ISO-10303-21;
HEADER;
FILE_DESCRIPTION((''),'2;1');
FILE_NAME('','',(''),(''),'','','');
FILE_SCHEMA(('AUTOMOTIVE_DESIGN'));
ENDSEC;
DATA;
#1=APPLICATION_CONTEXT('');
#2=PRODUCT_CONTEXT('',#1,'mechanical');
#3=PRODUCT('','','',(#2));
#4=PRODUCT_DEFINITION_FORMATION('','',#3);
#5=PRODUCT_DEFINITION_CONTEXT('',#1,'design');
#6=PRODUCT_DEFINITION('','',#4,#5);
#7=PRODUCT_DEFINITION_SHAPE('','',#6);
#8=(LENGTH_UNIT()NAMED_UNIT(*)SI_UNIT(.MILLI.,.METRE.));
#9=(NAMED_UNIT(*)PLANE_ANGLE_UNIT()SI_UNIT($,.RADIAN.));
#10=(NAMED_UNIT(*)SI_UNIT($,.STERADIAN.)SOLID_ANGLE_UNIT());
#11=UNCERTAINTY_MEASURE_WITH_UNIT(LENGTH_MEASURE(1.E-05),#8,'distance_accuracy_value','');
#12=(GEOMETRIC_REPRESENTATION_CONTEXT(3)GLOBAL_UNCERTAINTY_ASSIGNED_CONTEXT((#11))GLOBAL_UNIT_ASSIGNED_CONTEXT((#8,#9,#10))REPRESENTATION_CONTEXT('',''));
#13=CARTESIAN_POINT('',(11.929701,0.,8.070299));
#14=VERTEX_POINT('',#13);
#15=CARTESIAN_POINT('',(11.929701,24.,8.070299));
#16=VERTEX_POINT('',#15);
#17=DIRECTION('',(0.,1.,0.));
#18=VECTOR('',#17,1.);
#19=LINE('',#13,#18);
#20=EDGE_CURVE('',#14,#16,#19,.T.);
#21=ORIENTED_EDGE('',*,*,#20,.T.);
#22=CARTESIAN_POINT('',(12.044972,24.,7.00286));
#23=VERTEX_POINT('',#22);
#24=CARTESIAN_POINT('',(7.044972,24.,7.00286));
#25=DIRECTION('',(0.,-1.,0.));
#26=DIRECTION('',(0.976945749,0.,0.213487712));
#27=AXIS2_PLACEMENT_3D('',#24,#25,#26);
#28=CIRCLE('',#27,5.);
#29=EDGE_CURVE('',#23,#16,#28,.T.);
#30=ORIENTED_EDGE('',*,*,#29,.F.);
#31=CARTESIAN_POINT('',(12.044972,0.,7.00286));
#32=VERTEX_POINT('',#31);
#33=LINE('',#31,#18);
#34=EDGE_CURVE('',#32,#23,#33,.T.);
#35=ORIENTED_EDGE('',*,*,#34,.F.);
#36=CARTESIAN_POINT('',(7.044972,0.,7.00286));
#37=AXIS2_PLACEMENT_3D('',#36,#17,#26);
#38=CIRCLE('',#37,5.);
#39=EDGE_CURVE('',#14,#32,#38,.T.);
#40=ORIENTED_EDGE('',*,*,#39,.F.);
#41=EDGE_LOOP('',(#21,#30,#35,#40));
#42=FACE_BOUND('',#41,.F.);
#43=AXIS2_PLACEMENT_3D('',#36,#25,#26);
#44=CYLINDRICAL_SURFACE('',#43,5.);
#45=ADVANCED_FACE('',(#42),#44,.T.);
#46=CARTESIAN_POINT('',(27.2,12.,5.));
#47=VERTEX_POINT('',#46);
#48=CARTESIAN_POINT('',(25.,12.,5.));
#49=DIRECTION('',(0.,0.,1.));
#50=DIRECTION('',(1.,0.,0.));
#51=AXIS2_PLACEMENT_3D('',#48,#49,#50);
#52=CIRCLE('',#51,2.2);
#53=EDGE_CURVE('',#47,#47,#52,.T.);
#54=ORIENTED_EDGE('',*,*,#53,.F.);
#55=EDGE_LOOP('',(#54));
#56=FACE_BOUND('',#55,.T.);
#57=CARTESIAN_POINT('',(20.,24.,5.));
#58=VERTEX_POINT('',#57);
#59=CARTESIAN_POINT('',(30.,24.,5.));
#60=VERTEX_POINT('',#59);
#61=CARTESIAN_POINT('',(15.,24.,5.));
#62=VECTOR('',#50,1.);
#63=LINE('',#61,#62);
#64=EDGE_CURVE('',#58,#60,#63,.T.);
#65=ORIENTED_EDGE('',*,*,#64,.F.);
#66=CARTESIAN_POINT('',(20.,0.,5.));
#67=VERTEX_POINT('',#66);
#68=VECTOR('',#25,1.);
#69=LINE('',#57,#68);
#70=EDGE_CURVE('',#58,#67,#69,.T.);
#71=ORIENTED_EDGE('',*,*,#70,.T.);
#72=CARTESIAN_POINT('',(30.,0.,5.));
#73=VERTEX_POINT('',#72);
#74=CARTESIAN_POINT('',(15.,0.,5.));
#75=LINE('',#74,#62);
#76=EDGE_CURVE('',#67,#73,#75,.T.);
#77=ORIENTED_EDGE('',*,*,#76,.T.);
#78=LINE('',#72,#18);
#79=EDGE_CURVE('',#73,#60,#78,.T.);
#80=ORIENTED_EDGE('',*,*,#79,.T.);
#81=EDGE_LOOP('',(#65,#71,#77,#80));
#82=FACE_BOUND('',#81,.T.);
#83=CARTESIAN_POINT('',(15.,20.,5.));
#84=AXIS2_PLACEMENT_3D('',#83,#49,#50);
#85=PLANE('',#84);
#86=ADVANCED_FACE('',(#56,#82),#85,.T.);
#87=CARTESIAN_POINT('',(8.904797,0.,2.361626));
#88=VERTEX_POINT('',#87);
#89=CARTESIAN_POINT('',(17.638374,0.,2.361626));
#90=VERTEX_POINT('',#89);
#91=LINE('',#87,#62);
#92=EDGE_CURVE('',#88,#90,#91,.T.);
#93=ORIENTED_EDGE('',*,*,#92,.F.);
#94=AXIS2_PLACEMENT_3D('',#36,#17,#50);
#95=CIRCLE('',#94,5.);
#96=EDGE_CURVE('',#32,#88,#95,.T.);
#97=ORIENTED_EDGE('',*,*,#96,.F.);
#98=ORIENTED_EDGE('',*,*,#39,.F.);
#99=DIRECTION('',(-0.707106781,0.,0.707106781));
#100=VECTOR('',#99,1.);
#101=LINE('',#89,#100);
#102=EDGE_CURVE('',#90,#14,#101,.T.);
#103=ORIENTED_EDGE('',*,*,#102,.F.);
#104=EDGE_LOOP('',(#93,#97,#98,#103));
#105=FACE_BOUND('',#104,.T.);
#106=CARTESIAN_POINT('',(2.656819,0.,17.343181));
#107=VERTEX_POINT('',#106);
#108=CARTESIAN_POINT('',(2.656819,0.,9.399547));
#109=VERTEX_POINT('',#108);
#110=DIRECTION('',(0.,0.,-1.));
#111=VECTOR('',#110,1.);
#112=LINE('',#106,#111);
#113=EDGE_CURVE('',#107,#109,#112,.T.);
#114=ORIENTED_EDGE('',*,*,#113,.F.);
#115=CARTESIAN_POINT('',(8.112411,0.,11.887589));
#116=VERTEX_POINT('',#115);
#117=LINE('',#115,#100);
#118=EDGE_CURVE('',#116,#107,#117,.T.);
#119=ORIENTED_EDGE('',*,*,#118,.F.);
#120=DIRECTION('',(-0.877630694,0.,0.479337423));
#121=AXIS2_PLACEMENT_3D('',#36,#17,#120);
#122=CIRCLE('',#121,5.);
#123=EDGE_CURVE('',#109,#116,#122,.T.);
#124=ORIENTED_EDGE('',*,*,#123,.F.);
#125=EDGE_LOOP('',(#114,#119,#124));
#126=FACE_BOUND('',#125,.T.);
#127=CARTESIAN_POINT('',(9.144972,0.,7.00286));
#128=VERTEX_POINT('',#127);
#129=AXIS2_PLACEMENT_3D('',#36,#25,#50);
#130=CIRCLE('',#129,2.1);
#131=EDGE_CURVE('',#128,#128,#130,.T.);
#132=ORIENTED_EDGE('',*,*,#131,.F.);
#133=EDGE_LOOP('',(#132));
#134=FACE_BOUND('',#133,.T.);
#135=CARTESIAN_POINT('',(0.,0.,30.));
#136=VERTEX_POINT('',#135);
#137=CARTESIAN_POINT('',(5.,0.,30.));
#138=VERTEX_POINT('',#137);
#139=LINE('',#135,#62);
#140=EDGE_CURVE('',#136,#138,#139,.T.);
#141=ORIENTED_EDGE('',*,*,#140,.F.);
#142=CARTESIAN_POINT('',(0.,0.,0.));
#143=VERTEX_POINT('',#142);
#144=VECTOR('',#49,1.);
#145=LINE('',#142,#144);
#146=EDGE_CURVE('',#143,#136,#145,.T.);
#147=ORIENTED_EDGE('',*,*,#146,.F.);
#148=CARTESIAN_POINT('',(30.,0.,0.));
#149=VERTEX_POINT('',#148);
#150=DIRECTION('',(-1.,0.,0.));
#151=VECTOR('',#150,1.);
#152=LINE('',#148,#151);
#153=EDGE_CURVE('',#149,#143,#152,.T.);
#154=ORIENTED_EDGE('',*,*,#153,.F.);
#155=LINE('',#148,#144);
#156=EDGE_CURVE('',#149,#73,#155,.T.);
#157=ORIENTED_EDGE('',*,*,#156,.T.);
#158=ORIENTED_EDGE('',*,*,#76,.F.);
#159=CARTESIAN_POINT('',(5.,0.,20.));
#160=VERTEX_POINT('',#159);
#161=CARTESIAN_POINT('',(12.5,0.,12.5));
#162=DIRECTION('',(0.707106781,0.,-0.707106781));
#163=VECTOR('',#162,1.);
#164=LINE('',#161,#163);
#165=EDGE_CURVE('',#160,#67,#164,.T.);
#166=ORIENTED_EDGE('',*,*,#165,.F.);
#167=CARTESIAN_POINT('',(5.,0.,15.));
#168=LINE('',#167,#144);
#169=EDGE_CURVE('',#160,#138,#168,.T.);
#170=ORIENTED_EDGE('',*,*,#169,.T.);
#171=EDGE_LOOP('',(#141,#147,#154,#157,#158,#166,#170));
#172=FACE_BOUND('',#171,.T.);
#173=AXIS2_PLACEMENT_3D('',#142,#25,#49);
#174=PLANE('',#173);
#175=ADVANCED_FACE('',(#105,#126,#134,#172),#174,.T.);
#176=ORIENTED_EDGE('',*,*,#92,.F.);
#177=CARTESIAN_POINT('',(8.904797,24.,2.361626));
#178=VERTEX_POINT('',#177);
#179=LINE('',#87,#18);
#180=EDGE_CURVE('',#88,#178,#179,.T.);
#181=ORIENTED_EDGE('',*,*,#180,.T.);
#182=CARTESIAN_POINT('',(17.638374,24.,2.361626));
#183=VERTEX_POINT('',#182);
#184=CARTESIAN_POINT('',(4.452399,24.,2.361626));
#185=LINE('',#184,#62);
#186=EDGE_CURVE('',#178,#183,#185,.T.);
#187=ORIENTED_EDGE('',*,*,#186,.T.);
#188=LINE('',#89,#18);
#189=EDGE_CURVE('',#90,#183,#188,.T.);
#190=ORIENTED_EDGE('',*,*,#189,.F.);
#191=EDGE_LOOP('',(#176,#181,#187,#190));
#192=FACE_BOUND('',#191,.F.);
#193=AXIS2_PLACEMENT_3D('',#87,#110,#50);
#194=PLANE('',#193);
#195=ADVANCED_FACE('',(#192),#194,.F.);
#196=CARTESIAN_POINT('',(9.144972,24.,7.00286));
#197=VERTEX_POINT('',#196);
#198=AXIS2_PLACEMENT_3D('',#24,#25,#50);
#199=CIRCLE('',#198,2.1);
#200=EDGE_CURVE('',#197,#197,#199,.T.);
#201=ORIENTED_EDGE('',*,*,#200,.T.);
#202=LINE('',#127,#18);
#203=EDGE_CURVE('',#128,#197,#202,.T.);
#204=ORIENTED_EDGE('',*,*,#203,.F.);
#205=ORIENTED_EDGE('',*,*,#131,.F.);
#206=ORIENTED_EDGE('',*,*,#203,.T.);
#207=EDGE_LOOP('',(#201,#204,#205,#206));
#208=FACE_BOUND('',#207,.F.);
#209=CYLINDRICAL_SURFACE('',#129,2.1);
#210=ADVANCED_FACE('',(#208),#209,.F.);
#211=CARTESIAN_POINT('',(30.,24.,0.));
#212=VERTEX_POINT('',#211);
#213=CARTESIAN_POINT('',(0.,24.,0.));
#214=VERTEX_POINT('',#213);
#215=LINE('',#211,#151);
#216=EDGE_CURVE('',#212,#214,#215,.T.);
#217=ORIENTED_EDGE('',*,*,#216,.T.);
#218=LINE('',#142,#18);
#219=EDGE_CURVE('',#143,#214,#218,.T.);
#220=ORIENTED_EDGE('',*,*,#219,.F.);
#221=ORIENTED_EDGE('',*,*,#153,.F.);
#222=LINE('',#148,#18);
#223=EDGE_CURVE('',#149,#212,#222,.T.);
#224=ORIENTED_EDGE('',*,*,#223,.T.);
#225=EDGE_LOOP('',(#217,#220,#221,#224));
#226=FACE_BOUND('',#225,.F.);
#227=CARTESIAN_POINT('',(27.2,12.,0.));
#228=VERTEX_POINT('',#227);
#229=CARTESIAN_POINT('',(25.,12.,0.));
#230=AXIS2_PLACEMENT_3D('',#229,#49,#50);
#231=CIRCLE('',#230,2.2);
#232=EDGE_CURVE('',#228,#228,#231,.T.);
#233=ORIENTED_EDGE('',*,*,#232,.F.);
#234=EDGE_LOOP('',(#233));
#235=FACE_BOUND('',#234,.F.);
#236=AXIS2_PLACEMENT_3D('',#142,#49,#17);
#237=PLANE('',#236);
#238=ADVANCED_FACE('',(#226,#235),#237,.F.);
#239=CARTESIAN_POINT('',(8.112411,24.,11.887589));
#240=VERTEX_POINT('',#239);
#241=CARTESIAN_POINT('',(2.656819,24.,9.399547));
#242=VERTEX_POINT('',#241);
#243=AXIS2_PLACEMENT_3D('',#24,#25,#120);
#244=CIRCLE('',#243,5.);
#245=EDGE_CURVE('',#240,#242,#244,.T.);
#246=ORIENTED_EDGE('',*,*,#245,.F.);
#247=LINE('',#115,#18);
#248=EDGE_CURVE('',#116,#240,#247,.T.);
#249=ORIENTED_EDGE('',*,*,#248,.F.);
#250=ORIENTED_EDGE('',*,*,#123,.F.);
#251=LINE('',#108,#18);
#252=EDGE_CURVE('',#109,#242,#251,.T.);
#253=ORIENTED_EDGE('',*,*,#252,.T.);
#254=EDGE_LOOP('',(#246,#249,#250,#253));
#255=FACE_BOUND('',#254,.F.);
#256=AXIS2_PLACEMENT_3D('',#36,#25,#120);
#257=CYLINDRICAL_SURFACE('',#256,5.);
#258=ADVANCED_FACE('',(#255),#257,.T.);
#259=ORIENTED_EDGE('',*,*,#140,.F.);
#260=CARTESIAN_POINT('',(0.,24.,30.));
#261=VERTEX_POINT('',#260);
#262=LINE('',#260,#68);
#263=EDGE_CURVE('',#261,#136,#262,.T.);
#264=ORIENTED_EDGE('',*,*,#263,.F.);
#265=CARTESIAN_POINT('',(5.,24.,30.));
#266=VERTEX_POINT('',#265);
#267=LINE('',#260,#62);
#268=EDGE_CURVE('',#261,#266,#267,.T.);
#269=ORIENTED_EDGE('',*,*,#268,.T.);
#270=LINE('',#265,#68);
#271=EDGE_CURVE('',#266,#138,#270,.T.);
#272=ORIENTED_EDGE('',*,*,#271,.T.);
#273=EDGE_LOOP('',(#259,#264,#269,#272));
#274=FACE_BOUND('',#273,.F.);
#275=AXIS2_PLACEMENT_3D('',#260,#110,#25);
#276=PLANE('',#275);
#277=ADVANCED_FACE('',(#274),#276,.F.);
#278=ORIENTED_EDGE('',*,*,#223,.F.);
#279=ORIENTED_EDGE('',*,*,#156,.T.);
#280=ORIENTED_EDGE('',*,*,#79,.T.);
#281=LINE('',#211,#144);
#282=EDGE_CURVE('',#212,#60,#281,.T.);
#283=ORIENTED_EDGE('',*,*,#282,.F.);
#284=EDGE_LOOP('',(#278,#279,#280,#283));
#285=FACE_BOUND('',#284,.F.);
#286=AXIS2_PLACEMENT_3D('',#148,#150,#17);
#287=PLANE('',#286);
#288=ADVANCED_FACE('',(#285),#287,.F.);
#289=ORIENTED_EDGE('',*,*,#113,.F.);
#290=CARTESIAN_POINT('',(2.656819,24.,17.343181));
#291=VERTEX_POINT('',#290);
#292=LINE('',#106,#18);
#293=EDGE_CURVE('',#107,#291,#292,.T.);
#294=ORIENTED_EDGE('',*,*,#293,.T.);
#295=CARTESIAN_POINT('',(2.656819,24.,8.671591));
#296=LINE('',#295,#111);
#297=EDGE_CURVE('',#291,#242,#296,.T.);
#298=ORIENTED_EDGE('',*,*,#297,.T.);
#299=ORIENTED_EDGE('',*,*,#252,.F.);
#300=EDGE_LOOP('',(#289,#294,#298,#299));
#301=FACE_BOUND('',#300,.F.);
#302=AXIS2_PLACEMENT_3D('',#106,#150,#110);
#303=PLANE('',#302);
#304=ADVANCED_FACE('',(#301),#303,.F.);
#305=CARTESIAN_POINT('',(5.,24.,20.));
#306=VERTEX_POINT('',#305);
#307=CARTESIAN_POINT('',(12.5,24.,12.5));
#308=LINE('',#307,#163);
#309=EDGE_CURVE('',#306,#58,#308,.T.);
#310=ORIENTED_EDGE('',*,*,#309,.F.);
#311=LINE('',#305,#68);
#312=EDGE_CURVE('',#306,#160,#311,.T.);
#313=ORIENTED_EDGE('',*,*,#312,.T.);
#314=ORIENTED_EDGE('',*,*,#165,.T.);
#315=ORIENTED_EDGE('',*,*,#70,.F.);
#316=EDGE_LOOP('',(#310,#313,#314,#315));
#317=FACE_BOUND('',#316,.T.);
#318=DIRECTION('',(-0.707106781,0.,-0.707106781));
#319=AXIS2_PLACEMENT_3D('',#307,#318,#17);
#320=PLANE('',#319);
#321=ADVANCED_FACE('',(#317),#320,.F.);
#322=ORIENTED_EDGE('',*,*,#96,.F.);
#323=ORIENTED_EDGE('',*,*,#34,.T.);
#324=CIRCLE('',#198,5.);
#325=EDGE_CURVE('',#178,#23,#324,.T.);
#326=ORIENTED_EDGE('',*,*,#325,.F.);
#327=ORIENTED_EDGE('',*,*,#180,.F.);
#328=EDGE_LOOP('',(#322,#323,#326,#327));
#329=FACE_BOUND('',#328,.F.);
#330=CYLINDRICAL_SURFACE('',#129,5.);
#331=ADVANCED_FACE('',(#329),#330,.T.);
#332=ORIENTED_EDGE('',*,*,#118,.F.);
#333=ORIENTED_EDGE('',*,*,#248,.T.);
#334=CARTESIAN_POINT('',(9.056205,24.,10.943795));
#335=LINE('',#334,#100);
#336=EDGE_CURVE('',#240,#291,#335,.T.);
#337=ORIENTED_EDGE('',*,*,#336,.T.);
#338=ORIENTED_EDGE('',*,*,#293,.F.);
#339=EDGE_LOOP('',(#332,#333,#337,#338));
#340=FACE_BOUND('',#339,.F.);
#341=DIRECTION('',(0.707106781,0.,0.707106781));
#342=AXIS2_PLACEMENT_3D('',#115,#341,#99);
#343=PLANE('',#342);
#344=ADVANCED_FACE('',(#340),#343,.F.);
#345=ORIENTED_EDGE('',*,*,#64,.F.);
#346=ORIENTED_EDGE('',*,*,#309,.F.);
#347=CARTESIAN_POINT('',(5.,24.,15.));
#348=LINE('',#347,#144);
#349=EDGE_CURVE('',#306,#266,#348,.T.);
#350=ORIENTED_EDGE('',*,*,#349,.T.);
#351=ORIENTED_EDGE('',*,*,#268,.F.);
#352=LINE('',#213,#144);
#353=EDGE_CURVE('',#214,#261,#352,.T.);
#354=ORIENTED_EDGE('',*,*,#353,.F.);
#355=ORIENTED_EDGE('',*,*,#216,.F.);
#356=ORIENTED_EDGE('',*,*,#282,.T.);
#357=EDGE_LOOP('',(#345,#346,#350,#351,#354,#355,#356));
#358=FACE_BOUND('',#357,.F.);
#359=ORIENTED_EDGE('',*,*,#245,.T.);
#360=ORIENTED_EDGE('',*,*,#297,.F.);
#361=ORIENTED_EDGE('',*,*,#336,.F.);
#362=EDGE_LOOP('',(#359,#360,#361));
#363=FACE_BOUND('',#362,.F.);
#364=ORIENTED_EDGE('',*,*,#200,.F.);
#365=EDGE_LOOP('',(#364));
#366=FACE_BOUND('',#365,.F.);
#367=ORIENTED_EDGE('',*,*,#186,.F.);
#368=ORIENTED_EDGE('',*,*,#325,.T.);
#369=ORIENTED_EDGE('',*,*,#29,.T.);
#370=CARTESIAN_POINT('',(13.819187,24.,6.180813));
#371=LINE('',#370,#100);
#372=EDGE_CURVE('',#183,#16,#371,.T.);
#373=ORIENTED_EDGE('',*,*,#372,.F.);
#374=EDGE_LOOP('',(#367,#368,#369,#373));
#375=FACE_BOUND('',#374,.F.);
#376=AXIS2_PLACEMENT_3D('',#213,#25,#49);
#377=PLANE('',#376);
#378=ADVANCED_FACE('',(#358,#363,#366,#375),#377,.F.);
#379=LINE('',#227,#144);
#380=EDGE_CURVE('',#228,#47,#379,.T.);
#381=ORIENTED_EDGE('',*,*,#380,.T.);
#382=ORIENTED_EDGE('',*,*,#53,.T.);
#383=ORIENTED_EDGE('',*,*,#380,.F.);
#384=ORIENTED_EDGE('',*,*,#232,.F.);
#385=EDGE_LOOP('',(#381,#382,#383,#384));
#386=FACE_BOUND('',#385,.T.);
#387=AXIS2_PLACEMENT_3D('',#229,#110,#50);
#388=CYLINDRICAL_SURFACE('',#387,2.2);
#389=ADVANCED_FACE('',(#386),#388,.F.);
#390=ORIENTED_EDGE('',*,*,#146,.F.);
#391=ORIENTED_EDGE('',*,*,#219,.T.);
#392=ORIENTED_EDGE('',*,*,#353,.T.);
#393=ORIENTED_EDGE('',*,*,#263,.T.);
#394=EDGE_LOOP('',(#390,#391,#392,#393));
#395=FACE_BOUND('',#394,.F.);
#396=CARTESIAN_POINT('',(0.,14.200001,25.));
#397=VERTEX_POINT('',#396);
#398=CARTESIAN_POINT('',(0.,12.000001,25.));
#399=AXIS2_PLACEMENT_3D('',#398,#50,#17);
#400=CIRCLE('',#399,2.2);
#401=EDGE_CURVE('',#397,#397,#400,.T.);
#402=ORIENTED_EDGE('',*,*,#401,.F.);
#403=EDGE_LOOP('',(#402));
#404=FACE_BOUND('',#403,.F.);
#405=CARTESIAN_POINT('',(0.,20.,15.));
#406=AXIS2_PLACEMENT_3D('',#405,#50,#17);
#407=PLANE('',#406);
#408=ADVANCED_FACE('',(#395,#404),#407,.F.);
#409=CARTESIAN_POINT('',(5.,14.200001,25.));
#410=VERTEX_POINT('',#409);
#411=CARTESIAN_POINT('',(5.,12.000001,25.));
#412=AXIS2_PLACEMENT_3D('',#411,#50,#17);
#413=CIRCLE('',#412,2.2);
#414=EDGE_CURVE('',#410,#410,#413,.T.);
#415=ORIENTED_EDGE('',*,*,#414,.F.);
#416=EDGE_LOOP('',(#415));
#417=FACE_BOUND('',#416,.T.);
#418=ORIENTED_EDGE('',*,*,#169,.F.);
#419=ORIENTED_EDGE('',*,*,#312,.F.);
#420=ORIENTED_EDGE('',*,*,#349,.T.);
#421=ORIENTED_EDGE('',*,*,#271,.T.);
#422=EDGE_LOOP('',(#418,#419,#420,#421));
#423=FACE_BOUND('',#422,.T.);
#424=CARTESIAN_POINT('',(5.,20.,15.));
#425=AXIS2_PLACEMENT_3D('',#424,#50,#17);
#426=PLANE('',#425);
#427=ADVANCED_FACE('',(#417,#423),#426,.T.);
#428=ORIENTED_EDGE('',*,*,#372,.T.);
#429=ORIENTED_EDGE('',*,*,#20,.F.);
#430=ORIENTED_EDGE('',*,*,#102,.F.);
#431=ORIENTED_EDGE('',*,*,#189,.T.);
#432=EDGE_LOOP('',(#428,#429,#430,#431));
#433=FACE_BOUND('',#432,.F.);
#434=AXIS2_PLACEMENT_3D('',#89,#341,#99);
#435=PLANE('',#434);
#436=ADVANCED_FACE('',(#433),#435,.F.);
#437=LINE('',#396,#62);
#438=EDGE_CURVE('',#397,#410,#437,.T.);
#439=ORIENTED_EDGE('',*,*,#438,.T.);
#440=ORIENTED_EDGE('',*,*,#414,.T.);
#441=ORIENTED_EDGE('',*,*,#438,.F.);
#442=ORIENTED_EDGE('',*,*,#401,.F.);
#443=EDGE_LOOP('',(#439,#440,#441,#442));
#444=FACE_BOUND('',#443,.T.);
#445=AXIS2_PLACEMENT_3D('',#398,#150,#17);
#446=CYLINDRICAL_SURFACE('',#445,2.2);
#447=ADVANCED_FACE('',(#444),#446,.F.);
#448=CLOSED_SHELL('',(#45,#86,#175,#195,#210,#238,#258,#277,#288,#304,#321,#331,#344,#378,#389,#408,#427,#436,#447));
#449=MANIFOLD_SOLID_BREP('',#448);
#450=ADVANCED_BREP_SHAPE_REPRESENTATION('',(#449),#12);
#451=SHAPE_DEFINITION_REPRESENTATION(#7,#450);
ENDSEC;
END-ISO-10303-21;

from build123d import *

# Parameters (mm, degrees)
F1_W     = 8
F1_H     = 30
F1_R     = 2.2
F2_DEPTH = 5
F0_W     = 30
F0_H     = 8
F0_R     = 2.2
F3_DEPTH = 5
F5_SIZE  = 15
F4_R     = 2.1
F6_DEPTH = 30


with BuildPart() as f2:
    # F1 (on Right) → F2 (new body)
    with BuildSketch(Plane.YZ):
        with Locations((20, 15)):
            Rectangle(F1_W, F1_H)
        with Locations((12, 15)):
            Rectangle(F1_W, F1_H)
        with Locations((12.000000596, 25)):
            Circle(F1_R, mode=Mode.SUBTRACT)
        with Locations((4, 15)):
            Rectangle(F1_W, F1_H)
    extrude(amount=F2_DEPTH)

    # F0 (on Top) → F3 (join)
    with BuildSketch(Plane.XY):
        with Locations((15, 20)):
            Rectangle(F0_W, F0_H)
        with Locations((15, 12)):
            Rectangle(F0_W, F0_H)
        with Locations((25, 12)):
            Circle(F0_R, mode=Mode.SUBTRACT)
        with Locations((15, 4)):
            Rectangle(F0_W, F0_H)
    extrude(amount=F3_DEPTH)

    # F5
    f5_edges = [f2.edges().sort_by_distance(p)[0] for p in [
        (5, 12, 5),
    ]]
    chamfer(f5_edges, length=F5_SIZE)

    # F4 (on Front) → F6 (cut)
    with BuildSketch(Plane.XZ):
        with BuildLine():
            Line((8.9047972998, 2.3616264964), (17.6383735036, 2.3616264964))
            Line((17.6383735036, 2.3616264964), (11.929701132, 8.070298868))
            ThreePointArc((11.929701132, 8.070298868), (12.0160710439, 7.5396825646), (12.0449723862, 7.0028603077))
            ThreePointArc((12.0449723862, 7.0028603077), (11.1861753858, 4.2009970498), (8.9047972998, 2.3616264964))
        make_face()
        with BuildLine():
            ThreePointArc((2.6568189153, 9.3995474202), (4.970273692, 11.5521047865), (8.1124109465, 11.8875890535))
            Line((8.1124109465, 11.8875890535), (2.6568189153, 17.3431810847))
            Line((2.6568189153, 17.3431810847), (2.6568189153, 9.3995474202))
        make_face()
        with Locations((7.0449723862, 7.0028603077)):
            Circle(F4_R)
    extrude(amount=-F6_DEPTH, mode=Mode.SUBTRACT)


solid = f2.part
